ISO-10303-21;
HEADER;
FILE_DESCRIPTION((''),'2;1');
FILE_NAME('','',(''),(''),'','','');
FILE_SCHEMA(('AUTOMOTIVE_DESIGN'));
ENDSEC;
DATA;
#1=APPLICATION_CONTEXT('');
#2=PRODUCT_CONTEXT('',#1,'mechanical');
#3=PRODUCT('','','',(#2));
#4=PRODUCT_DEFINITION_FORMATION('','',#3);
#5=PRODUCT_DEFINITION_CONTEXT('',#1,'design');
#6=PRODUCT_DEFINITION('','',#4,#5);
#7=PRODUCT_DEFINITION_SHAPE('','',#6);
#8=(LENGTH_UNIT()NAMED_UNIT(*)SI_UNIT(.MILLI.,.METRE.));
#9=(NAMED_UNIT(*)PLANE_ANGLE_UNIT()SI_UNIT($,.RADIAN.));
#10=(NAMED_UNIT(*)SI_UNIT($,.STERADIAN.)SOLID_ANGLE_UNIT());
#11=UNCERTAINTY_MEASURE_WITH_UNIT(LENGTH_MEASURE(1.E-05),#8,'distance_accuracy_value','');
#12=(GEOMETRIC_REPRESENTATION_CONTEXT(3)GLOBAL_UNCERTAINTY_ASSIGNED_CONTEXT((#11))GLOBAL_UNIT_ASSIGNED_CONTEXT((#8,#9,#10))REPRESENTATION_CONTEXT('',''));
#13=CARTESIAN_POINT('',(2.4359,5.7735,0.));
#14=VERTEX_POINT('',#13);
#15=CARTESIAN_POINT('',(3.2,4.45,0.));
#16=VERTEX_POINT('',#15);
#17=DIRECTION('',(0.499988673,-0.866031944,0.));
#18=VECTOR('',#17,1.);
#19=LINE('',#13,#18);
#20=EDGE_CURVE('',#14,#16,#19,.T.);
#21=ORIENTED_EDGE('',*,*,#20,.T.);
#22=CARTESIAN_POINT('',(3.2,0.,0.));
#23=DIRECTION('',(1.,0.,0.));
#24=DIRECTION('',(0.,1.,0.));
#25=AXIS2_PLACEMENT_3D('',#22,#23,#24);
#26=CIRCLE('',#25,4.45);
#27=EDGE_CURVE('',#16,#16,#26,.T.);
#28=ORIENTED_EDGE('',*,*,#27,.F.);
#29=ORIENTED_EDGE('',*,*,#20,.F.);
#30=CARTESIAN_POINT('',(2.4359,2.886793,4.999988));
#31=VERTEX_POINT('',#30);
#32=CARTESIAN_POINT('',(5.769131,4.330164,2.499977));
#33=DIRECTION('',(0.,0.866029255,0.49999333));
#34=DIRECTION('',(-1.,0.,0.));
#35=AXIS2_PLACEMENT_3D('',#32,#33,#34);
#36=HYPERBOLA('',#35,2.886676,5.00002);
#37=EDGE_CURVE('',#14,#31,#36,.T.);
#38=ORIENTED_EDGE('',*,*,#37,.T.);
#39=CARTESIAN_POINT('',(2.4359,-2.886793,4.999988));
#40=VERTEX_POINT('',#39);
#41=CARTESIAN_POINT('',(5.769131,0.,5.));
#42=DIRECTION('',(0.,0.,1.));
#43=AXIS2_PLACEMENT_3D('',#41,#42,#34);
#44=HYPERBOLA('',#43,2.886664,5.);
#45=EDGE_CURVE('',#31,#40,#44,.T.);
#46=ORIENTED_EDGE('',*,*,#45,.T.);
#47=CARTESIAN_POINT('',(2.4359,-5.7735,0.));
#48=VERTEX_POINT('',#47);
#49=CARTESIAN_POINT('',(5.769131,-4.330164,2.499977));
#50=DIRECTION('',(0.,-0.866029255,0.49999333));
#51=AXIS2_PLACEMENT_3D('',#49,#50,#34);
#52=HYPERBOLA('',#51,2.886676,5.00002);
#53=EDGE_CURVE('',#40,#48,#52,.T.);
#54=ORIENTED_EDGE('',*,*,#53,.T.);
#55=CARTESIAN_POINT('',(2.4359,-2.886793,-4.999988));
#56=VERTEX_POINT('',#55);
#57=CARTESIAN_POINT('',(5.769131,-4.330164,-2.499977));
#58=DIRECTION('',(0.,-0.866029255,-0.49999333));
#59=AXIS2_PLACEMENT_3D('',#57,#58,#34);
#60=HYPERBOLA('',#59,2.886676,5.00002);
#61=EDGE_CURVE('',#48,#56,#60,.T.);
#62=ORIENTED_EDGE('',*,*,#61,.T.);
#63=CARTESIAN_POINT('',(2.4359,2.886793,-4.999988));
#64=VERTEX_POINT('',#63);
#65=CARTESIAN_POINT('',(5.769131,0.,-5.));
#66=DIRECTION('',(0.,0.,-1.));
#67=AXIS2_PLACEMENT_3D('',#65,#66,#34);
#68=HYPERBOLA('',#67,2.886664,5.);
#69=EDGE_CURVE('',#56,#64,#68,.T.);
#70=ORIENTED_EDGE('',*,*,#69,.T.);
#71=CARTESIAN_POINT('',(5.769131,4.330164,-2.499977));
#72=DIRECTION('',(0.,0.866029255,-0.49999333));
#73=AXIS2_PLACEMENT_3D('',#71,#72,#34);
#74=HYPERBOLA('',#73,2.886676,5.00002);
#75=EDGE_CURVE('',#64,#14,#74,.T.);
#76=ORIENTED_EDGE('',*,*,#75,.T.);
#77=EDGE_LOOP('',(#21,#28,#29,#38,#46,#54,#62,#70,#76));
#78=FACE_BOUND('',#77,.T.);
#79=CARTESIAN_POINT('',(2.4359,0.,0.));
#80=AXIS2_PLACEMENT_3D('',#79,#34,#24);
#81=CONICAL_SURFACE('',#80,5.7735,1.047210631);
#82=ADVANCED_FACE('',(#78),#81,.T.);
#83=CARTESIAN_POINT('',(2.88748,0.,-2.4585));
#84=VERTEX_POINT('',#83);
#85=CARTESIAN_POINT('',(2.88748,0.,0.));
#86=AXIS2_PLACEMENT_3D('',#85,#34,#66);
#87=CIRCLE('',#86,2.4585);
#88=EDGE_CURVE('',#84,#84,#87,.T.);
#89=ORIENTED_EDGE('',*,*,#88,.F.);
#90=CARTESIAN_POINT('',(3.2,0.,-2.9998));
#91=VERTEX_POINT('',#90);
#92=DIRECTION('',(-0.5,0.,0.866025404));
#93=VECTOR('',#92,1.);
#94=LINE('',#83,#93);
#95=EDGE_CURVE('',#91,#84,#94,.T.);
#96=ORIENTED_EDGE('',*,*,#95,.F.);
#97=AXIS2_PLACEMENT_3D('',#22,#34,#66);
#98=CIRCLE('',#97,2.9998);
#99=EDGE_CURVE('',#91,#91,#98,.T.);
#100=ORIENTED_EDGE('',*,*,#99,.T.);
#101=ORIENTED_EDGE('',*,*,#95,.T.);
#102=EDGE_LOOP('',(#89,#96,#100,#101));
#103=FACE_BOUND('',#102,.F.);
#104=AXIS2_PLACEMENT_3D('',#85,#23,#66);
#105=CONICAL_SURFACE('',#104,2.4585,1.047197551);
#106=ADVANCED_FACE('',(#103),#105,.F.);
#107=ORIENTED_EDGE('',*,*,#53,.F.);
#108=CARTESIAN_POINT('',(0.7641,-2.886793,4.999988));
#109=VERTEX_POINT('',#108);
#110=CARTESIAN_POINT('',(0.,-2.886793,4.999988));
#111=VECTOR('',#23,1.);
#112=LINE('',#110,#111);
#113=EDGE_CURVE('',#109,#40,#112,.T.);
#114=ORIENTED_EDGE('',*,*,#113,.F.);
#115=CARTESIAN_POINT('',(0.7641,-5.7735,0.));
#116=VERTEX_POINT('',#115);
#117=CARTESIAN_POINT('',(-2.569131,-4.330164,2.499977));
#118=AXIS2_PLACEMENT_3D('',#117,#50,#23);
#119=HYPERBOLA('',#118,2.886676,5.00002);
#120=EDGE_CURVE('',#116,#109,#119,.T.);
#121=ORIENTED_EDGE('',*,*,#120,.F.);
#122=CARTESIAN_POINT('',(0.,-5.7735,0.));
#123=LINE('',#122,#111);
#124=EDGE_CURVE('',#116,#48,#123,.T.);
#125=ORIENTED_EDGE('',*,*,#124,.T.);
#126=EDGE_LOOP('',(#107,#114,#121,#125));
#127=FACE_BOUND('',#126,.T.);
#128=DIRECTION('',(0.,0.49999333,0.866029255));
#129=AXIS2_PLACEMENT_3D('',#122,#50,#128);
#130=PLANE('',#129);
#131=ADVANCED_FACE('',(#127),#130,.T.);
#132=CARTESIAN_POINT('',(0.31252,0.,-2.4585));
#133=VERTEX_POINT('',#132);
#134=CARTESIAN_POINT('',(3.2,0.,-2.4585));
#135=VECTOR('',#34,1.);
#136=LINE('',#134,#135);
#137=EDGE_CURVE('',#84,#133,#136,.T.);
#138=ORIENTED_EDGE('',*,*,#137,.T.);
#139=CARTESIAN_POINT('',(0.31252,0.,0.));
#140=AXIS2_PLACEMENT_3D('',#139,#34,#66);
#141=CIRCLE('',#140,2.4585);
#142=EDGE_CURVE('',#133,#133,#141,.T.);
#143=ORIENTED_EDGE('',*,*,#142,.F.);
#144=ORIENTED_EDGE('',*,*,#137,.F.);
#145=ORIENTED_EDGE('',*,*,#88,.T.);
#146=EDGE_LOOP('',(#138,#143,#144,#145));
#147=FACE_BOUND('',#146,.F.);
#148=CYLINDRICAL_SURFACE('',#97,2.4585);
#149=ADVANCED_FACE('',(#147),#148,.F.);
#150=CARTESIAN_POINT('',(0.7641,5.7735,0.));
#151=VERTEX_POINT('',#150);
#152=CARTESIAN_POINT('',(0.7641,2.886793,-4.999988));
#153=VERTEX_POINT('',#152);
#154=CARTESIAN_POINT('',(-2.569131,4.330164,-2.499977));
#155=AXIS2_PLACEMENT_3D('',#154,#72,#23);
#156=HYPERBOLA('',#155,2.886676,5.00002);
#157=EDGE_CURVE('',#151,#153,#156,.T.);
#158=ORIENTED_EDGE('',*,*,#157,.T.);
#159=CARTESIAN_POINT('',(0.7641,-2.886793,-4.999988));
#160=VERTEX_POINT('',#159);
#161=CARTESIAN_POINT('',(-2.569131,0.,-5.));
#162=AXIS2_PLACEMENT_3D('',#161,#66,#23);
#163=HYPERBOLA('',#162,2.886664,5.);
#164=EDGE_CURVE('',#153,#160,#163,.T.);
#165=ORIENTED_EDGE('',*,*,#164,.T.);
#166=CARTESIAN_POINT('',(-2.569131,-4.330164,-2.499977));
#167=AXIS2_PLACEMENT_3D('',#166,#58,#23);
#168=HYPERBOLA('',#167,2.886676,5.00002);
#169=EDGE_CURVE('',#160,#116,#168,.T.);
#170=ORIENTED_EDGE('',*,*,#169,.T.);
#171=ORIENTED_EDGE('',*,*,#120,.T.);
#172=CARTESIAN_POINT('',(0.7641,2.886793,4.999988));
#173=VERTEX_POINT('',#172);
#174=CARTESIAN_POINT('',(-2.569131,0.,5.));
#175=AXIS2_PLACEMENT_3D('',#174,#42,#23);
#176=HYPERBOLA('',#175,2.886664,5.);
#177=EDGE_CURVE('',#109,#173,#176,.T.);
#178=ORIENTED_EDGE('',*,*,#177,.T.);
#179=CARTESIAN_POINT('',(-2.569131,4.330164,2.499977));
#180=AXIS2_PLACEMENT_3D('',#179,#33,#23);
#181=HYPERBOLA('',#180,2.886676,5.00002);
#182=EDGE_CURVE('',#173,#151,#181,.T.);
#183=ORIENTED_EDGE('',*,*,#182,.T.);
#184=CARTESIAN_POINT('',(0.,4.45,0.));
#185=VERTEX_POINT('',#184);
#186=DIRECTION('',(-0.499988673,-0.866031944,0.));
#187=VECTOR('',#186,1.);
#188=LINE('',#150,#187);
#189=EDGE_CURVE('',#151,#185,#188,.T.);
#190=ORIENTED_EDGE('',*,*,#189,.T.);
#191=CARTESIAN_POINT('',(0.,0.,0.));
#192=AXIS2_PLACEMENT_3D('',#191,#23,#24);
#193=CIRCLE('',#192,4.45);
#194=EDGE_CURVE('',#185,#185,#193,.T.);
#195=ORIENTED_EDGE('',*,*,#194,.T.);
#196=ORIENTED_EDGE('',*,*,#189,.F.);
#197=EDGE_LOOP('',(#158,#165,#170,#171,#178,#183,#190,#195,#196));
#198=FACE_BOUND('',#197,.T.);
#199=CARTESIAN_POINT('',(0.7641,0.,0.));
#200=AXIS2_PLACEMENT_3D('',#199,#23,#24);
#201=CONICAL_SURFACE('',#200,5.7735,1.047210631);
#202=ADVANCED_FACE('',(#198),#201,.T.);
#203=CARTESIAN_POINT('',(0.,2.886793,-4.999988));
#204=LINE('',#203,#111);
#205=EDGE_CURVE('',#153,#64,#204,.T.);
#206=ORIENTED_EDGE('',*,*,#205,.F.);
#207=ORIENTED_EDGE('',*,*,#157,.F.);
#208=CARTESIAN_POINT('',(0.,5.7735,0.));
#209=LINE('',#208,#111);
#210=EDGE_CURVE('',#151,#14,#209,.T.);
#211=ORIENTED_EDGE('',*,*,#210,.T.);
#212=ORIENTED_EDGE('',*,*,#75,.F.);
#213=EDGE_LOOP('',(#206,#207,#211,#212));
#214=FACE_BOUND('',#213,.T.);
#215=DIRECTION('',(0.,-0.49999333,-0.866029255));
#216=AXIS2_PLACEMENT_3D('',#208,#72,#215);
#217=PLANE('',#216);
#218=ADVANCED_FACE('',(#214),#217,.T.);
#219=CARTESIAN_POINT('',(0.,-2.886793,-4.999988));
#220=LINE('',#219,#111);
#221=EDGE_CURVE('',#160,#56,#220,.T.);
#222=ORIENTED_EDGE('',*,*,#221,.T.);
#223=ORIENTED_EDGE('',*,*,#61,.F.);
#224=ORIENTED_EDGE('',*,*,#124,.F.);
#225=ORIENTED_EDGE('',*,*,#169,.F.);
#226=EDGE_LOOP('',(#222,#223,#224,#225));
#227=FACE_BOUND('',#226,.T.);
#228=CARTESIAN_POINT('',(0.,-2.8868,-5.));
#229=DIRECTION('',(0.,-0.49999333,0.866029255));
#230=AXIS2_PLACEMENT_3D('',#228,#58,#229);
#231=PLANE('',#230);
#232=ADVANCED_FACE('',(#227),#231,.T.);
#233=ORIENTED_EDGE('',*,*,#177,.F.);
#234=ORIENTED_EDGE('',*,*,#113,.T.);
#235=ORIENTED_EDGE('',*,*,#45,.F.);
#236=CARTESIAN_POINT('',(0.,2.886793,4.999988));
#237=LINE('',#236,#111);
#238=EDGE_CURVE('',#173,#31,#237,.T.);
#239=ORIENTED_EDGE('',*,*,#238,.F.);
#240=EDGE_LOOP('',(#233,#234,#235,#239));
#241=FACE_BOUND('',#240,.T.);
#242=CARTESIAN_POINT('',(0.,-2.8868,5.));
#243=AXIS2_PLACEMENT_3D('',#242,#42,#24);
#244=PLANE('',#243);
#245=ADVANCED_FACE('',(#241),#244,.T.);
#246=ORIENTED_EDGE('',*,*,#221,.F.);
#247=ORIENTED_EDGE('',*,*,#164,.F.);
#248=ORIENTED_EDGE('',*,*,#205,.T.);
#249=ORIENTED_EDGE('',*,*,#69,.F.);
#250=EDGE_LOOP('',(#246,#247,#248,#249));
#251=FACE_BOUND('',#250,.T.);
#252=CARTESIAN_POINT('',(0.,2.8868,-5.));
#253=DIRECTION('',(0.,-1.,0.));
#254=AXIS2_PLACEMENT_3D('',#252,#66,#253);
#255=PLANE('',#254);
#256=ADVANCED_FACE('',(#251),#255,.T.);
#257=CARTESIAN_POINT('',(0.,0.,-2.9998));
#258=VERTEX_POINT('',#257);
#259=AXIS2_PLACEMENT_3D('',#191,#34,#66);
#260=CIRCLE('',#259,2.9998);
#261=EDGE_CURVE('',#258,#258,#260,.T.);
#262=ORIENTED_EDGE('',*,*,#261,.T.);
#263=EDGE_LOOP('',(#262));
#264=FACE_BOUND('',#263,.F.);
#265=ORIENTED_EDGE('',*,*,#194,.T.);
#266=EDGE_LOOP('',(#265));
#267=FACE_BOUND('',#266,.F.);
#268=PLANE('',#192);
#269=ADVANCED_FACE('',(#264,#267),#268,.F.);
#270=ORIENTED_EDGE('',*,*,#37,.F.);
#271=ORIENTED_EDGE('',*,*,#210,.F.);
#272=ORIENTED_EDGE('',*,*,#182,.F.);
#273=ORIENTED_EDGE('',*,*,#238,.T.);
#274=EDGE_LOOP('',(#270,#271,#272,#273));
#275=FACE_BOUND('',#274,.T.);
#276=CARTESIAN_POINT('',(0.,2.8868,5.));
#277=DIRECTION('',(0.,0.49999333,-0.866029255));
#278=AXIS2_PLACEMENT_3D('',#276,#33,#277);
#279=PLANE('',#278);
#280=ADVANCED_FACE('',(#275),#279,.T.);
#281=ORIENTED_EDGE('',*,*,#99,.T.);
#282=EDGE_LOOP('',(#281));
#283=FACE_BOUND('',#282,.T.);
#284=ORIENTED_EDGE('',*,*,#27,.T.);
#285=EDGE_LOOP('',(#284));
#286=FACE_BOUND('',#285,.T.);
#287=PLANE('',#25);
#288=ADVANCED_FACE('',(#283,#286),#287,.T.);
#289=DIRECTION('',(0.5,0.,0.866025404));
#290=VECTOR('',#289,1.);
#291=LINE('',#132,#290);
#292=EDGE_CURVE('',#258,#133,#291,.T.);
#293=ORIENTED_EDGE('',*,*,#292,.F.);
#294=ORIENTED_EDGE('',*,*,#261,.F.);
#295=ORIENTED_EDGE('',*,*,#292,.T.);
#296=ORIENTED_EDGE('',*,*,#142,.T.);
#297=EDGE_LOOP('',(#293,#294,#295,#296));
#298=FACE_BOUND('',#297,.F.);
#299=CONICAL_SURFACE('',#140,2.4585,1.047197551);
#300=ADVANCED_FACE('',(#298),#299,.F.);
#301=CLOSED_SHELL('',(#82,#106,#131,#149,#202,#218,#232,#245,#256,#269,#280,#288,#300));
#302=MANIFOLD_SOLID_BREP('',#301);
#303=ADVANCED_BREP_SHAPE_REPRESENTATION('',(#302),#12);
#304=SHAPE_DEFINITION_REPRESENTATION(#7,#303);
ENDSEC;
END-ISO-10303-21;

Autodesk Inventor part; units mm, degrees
ref_plane "YZ Plane" through (0, 0, 0) normal (1, 0, 0) x (0, 1, 0)
ref_plane "XZ Plane" through (0, 0, 0) normal (0, 1, 0) x (-1, 0, 0)
sketch "Skizze1" plane through (0, 0, 0) normal (1, 0, 0) x (0, 1, 0)
  line L0 (-5.7735, 0) -> (-2.8868, 5)
  line L1 (-2.8868, 5) -> (2.8868, 5)
  line L2 (2.8868, 5) -> (5.7735, 0)
  line L3 (5.7735, 0) -> (2.8868, -5)
  line L4 (2.8868, -5) -> (-2.8868, -5)
  line L5 (-2.8868, -5) -> (-5.7735, 0)
  point P0 (0, 0)
  point P1 (0, 0)
  dimension "d0" = 11.547
extrude "Körper" add sketch "Skizze1" along normal blind 3.2
sketch "Skizze2" plane through (0, 0, 0) normal (0, 0, 1) x (1, 0, 0)
  line L0 (0, 2.8868) -> (0, 5.7735) projected
  line L1 (0, 5.7735) -> (3.2, 5.7735) projected
  line L2 (3.2, 2.8868) -> (3.2, 5.7735) projected
  line L3 (-0.64, 0) -> (3.84, 0) projected
  line L4 (0.7641, 5.7735) -> (0, 4.45)
  line L5 (2.4359, 5.7735) -> (3.2, 4.45)
  dimension "d3" = 30
  dimension "d4" = 30
  dimension "d5" = 8.9
  dimension "d6" = 8.9
revolve "Fase1" cut sketch "Skizze2" angle 360 about axis through (-10, 0, 0) along (1, 0, 0)
sketch "Skizze3" plane through (3.2, 0, 0) normal (1, 0, 0) x (0, 0, -1)
  arc A0 (-0.625, -1.0825) -> (0.625, -1.0825) centre (0, 0) ccw projected
hole "Gewinde" at (3.2, 0, 0) direction (-1, 0, 0) diameter 4.917 end through all thread size "M6x1" class "6H" standard "ISO Metric profile"
chamfer "Fase2" distance 0.5413 angle 30 1 edges at (3.2, 0, 2.4585) measured on face at (3.2, 3.7371, -0.4538)
chamfer "Fase3" distance 0.5413 angle 30 1 edges at (0, 0, 2.4585) measured on face at (0, 3.7371, -0.4538)
ref_plane "Work Plane1" through (-12.4358, 0, 0) normal (0, -0.8660254, -0.5) x (1, 0, 0)
equation "\"d0\" = 1.1547 * SW"
equation "\"d1\" = KOH"
equation "\"d3\" = ANG1"
equation "\"d4\" = ANG2"
equation "\"d5\" = SW0"
equation "\"d6\" = SW01"
equation "\"d8\" = -0.5 * GD1 + 0.5 * NND"
equation "\"d40\" = -0.5 * GD1 + 0.5 * NND"
equation "\"d10\" = -0.5 * GD1 + 0.5 * NND"
equation "\"d41\" = -0.5 * GD1 + 0.5 * NND"
equation "\"ANG1\" = 30deg"
equation "\"ANG2\" = 30deg"
equation "\"NND\" = 6"
equation "\"KOH\" = 3.2"
equation "\"SW0\" = 8.9"
equation "\"SW01\" = SW0"
equation "\"GUL\" = 0.541266 * PTC"
equation "\"THREADDIA\" = 6"
equation "\"TOA\" = 30deg"
equation "\"PTC\" = 1"
equation "\"E0\" = 1.155 * SW"
equation "\"GAL\" = 0.541266 * PTC"
equation "\"SW\" = 10"
equation "\"GD1\" = 4.917468"
properties part number "ISO 4035 - M6" material "Edelstahl, 440C"
